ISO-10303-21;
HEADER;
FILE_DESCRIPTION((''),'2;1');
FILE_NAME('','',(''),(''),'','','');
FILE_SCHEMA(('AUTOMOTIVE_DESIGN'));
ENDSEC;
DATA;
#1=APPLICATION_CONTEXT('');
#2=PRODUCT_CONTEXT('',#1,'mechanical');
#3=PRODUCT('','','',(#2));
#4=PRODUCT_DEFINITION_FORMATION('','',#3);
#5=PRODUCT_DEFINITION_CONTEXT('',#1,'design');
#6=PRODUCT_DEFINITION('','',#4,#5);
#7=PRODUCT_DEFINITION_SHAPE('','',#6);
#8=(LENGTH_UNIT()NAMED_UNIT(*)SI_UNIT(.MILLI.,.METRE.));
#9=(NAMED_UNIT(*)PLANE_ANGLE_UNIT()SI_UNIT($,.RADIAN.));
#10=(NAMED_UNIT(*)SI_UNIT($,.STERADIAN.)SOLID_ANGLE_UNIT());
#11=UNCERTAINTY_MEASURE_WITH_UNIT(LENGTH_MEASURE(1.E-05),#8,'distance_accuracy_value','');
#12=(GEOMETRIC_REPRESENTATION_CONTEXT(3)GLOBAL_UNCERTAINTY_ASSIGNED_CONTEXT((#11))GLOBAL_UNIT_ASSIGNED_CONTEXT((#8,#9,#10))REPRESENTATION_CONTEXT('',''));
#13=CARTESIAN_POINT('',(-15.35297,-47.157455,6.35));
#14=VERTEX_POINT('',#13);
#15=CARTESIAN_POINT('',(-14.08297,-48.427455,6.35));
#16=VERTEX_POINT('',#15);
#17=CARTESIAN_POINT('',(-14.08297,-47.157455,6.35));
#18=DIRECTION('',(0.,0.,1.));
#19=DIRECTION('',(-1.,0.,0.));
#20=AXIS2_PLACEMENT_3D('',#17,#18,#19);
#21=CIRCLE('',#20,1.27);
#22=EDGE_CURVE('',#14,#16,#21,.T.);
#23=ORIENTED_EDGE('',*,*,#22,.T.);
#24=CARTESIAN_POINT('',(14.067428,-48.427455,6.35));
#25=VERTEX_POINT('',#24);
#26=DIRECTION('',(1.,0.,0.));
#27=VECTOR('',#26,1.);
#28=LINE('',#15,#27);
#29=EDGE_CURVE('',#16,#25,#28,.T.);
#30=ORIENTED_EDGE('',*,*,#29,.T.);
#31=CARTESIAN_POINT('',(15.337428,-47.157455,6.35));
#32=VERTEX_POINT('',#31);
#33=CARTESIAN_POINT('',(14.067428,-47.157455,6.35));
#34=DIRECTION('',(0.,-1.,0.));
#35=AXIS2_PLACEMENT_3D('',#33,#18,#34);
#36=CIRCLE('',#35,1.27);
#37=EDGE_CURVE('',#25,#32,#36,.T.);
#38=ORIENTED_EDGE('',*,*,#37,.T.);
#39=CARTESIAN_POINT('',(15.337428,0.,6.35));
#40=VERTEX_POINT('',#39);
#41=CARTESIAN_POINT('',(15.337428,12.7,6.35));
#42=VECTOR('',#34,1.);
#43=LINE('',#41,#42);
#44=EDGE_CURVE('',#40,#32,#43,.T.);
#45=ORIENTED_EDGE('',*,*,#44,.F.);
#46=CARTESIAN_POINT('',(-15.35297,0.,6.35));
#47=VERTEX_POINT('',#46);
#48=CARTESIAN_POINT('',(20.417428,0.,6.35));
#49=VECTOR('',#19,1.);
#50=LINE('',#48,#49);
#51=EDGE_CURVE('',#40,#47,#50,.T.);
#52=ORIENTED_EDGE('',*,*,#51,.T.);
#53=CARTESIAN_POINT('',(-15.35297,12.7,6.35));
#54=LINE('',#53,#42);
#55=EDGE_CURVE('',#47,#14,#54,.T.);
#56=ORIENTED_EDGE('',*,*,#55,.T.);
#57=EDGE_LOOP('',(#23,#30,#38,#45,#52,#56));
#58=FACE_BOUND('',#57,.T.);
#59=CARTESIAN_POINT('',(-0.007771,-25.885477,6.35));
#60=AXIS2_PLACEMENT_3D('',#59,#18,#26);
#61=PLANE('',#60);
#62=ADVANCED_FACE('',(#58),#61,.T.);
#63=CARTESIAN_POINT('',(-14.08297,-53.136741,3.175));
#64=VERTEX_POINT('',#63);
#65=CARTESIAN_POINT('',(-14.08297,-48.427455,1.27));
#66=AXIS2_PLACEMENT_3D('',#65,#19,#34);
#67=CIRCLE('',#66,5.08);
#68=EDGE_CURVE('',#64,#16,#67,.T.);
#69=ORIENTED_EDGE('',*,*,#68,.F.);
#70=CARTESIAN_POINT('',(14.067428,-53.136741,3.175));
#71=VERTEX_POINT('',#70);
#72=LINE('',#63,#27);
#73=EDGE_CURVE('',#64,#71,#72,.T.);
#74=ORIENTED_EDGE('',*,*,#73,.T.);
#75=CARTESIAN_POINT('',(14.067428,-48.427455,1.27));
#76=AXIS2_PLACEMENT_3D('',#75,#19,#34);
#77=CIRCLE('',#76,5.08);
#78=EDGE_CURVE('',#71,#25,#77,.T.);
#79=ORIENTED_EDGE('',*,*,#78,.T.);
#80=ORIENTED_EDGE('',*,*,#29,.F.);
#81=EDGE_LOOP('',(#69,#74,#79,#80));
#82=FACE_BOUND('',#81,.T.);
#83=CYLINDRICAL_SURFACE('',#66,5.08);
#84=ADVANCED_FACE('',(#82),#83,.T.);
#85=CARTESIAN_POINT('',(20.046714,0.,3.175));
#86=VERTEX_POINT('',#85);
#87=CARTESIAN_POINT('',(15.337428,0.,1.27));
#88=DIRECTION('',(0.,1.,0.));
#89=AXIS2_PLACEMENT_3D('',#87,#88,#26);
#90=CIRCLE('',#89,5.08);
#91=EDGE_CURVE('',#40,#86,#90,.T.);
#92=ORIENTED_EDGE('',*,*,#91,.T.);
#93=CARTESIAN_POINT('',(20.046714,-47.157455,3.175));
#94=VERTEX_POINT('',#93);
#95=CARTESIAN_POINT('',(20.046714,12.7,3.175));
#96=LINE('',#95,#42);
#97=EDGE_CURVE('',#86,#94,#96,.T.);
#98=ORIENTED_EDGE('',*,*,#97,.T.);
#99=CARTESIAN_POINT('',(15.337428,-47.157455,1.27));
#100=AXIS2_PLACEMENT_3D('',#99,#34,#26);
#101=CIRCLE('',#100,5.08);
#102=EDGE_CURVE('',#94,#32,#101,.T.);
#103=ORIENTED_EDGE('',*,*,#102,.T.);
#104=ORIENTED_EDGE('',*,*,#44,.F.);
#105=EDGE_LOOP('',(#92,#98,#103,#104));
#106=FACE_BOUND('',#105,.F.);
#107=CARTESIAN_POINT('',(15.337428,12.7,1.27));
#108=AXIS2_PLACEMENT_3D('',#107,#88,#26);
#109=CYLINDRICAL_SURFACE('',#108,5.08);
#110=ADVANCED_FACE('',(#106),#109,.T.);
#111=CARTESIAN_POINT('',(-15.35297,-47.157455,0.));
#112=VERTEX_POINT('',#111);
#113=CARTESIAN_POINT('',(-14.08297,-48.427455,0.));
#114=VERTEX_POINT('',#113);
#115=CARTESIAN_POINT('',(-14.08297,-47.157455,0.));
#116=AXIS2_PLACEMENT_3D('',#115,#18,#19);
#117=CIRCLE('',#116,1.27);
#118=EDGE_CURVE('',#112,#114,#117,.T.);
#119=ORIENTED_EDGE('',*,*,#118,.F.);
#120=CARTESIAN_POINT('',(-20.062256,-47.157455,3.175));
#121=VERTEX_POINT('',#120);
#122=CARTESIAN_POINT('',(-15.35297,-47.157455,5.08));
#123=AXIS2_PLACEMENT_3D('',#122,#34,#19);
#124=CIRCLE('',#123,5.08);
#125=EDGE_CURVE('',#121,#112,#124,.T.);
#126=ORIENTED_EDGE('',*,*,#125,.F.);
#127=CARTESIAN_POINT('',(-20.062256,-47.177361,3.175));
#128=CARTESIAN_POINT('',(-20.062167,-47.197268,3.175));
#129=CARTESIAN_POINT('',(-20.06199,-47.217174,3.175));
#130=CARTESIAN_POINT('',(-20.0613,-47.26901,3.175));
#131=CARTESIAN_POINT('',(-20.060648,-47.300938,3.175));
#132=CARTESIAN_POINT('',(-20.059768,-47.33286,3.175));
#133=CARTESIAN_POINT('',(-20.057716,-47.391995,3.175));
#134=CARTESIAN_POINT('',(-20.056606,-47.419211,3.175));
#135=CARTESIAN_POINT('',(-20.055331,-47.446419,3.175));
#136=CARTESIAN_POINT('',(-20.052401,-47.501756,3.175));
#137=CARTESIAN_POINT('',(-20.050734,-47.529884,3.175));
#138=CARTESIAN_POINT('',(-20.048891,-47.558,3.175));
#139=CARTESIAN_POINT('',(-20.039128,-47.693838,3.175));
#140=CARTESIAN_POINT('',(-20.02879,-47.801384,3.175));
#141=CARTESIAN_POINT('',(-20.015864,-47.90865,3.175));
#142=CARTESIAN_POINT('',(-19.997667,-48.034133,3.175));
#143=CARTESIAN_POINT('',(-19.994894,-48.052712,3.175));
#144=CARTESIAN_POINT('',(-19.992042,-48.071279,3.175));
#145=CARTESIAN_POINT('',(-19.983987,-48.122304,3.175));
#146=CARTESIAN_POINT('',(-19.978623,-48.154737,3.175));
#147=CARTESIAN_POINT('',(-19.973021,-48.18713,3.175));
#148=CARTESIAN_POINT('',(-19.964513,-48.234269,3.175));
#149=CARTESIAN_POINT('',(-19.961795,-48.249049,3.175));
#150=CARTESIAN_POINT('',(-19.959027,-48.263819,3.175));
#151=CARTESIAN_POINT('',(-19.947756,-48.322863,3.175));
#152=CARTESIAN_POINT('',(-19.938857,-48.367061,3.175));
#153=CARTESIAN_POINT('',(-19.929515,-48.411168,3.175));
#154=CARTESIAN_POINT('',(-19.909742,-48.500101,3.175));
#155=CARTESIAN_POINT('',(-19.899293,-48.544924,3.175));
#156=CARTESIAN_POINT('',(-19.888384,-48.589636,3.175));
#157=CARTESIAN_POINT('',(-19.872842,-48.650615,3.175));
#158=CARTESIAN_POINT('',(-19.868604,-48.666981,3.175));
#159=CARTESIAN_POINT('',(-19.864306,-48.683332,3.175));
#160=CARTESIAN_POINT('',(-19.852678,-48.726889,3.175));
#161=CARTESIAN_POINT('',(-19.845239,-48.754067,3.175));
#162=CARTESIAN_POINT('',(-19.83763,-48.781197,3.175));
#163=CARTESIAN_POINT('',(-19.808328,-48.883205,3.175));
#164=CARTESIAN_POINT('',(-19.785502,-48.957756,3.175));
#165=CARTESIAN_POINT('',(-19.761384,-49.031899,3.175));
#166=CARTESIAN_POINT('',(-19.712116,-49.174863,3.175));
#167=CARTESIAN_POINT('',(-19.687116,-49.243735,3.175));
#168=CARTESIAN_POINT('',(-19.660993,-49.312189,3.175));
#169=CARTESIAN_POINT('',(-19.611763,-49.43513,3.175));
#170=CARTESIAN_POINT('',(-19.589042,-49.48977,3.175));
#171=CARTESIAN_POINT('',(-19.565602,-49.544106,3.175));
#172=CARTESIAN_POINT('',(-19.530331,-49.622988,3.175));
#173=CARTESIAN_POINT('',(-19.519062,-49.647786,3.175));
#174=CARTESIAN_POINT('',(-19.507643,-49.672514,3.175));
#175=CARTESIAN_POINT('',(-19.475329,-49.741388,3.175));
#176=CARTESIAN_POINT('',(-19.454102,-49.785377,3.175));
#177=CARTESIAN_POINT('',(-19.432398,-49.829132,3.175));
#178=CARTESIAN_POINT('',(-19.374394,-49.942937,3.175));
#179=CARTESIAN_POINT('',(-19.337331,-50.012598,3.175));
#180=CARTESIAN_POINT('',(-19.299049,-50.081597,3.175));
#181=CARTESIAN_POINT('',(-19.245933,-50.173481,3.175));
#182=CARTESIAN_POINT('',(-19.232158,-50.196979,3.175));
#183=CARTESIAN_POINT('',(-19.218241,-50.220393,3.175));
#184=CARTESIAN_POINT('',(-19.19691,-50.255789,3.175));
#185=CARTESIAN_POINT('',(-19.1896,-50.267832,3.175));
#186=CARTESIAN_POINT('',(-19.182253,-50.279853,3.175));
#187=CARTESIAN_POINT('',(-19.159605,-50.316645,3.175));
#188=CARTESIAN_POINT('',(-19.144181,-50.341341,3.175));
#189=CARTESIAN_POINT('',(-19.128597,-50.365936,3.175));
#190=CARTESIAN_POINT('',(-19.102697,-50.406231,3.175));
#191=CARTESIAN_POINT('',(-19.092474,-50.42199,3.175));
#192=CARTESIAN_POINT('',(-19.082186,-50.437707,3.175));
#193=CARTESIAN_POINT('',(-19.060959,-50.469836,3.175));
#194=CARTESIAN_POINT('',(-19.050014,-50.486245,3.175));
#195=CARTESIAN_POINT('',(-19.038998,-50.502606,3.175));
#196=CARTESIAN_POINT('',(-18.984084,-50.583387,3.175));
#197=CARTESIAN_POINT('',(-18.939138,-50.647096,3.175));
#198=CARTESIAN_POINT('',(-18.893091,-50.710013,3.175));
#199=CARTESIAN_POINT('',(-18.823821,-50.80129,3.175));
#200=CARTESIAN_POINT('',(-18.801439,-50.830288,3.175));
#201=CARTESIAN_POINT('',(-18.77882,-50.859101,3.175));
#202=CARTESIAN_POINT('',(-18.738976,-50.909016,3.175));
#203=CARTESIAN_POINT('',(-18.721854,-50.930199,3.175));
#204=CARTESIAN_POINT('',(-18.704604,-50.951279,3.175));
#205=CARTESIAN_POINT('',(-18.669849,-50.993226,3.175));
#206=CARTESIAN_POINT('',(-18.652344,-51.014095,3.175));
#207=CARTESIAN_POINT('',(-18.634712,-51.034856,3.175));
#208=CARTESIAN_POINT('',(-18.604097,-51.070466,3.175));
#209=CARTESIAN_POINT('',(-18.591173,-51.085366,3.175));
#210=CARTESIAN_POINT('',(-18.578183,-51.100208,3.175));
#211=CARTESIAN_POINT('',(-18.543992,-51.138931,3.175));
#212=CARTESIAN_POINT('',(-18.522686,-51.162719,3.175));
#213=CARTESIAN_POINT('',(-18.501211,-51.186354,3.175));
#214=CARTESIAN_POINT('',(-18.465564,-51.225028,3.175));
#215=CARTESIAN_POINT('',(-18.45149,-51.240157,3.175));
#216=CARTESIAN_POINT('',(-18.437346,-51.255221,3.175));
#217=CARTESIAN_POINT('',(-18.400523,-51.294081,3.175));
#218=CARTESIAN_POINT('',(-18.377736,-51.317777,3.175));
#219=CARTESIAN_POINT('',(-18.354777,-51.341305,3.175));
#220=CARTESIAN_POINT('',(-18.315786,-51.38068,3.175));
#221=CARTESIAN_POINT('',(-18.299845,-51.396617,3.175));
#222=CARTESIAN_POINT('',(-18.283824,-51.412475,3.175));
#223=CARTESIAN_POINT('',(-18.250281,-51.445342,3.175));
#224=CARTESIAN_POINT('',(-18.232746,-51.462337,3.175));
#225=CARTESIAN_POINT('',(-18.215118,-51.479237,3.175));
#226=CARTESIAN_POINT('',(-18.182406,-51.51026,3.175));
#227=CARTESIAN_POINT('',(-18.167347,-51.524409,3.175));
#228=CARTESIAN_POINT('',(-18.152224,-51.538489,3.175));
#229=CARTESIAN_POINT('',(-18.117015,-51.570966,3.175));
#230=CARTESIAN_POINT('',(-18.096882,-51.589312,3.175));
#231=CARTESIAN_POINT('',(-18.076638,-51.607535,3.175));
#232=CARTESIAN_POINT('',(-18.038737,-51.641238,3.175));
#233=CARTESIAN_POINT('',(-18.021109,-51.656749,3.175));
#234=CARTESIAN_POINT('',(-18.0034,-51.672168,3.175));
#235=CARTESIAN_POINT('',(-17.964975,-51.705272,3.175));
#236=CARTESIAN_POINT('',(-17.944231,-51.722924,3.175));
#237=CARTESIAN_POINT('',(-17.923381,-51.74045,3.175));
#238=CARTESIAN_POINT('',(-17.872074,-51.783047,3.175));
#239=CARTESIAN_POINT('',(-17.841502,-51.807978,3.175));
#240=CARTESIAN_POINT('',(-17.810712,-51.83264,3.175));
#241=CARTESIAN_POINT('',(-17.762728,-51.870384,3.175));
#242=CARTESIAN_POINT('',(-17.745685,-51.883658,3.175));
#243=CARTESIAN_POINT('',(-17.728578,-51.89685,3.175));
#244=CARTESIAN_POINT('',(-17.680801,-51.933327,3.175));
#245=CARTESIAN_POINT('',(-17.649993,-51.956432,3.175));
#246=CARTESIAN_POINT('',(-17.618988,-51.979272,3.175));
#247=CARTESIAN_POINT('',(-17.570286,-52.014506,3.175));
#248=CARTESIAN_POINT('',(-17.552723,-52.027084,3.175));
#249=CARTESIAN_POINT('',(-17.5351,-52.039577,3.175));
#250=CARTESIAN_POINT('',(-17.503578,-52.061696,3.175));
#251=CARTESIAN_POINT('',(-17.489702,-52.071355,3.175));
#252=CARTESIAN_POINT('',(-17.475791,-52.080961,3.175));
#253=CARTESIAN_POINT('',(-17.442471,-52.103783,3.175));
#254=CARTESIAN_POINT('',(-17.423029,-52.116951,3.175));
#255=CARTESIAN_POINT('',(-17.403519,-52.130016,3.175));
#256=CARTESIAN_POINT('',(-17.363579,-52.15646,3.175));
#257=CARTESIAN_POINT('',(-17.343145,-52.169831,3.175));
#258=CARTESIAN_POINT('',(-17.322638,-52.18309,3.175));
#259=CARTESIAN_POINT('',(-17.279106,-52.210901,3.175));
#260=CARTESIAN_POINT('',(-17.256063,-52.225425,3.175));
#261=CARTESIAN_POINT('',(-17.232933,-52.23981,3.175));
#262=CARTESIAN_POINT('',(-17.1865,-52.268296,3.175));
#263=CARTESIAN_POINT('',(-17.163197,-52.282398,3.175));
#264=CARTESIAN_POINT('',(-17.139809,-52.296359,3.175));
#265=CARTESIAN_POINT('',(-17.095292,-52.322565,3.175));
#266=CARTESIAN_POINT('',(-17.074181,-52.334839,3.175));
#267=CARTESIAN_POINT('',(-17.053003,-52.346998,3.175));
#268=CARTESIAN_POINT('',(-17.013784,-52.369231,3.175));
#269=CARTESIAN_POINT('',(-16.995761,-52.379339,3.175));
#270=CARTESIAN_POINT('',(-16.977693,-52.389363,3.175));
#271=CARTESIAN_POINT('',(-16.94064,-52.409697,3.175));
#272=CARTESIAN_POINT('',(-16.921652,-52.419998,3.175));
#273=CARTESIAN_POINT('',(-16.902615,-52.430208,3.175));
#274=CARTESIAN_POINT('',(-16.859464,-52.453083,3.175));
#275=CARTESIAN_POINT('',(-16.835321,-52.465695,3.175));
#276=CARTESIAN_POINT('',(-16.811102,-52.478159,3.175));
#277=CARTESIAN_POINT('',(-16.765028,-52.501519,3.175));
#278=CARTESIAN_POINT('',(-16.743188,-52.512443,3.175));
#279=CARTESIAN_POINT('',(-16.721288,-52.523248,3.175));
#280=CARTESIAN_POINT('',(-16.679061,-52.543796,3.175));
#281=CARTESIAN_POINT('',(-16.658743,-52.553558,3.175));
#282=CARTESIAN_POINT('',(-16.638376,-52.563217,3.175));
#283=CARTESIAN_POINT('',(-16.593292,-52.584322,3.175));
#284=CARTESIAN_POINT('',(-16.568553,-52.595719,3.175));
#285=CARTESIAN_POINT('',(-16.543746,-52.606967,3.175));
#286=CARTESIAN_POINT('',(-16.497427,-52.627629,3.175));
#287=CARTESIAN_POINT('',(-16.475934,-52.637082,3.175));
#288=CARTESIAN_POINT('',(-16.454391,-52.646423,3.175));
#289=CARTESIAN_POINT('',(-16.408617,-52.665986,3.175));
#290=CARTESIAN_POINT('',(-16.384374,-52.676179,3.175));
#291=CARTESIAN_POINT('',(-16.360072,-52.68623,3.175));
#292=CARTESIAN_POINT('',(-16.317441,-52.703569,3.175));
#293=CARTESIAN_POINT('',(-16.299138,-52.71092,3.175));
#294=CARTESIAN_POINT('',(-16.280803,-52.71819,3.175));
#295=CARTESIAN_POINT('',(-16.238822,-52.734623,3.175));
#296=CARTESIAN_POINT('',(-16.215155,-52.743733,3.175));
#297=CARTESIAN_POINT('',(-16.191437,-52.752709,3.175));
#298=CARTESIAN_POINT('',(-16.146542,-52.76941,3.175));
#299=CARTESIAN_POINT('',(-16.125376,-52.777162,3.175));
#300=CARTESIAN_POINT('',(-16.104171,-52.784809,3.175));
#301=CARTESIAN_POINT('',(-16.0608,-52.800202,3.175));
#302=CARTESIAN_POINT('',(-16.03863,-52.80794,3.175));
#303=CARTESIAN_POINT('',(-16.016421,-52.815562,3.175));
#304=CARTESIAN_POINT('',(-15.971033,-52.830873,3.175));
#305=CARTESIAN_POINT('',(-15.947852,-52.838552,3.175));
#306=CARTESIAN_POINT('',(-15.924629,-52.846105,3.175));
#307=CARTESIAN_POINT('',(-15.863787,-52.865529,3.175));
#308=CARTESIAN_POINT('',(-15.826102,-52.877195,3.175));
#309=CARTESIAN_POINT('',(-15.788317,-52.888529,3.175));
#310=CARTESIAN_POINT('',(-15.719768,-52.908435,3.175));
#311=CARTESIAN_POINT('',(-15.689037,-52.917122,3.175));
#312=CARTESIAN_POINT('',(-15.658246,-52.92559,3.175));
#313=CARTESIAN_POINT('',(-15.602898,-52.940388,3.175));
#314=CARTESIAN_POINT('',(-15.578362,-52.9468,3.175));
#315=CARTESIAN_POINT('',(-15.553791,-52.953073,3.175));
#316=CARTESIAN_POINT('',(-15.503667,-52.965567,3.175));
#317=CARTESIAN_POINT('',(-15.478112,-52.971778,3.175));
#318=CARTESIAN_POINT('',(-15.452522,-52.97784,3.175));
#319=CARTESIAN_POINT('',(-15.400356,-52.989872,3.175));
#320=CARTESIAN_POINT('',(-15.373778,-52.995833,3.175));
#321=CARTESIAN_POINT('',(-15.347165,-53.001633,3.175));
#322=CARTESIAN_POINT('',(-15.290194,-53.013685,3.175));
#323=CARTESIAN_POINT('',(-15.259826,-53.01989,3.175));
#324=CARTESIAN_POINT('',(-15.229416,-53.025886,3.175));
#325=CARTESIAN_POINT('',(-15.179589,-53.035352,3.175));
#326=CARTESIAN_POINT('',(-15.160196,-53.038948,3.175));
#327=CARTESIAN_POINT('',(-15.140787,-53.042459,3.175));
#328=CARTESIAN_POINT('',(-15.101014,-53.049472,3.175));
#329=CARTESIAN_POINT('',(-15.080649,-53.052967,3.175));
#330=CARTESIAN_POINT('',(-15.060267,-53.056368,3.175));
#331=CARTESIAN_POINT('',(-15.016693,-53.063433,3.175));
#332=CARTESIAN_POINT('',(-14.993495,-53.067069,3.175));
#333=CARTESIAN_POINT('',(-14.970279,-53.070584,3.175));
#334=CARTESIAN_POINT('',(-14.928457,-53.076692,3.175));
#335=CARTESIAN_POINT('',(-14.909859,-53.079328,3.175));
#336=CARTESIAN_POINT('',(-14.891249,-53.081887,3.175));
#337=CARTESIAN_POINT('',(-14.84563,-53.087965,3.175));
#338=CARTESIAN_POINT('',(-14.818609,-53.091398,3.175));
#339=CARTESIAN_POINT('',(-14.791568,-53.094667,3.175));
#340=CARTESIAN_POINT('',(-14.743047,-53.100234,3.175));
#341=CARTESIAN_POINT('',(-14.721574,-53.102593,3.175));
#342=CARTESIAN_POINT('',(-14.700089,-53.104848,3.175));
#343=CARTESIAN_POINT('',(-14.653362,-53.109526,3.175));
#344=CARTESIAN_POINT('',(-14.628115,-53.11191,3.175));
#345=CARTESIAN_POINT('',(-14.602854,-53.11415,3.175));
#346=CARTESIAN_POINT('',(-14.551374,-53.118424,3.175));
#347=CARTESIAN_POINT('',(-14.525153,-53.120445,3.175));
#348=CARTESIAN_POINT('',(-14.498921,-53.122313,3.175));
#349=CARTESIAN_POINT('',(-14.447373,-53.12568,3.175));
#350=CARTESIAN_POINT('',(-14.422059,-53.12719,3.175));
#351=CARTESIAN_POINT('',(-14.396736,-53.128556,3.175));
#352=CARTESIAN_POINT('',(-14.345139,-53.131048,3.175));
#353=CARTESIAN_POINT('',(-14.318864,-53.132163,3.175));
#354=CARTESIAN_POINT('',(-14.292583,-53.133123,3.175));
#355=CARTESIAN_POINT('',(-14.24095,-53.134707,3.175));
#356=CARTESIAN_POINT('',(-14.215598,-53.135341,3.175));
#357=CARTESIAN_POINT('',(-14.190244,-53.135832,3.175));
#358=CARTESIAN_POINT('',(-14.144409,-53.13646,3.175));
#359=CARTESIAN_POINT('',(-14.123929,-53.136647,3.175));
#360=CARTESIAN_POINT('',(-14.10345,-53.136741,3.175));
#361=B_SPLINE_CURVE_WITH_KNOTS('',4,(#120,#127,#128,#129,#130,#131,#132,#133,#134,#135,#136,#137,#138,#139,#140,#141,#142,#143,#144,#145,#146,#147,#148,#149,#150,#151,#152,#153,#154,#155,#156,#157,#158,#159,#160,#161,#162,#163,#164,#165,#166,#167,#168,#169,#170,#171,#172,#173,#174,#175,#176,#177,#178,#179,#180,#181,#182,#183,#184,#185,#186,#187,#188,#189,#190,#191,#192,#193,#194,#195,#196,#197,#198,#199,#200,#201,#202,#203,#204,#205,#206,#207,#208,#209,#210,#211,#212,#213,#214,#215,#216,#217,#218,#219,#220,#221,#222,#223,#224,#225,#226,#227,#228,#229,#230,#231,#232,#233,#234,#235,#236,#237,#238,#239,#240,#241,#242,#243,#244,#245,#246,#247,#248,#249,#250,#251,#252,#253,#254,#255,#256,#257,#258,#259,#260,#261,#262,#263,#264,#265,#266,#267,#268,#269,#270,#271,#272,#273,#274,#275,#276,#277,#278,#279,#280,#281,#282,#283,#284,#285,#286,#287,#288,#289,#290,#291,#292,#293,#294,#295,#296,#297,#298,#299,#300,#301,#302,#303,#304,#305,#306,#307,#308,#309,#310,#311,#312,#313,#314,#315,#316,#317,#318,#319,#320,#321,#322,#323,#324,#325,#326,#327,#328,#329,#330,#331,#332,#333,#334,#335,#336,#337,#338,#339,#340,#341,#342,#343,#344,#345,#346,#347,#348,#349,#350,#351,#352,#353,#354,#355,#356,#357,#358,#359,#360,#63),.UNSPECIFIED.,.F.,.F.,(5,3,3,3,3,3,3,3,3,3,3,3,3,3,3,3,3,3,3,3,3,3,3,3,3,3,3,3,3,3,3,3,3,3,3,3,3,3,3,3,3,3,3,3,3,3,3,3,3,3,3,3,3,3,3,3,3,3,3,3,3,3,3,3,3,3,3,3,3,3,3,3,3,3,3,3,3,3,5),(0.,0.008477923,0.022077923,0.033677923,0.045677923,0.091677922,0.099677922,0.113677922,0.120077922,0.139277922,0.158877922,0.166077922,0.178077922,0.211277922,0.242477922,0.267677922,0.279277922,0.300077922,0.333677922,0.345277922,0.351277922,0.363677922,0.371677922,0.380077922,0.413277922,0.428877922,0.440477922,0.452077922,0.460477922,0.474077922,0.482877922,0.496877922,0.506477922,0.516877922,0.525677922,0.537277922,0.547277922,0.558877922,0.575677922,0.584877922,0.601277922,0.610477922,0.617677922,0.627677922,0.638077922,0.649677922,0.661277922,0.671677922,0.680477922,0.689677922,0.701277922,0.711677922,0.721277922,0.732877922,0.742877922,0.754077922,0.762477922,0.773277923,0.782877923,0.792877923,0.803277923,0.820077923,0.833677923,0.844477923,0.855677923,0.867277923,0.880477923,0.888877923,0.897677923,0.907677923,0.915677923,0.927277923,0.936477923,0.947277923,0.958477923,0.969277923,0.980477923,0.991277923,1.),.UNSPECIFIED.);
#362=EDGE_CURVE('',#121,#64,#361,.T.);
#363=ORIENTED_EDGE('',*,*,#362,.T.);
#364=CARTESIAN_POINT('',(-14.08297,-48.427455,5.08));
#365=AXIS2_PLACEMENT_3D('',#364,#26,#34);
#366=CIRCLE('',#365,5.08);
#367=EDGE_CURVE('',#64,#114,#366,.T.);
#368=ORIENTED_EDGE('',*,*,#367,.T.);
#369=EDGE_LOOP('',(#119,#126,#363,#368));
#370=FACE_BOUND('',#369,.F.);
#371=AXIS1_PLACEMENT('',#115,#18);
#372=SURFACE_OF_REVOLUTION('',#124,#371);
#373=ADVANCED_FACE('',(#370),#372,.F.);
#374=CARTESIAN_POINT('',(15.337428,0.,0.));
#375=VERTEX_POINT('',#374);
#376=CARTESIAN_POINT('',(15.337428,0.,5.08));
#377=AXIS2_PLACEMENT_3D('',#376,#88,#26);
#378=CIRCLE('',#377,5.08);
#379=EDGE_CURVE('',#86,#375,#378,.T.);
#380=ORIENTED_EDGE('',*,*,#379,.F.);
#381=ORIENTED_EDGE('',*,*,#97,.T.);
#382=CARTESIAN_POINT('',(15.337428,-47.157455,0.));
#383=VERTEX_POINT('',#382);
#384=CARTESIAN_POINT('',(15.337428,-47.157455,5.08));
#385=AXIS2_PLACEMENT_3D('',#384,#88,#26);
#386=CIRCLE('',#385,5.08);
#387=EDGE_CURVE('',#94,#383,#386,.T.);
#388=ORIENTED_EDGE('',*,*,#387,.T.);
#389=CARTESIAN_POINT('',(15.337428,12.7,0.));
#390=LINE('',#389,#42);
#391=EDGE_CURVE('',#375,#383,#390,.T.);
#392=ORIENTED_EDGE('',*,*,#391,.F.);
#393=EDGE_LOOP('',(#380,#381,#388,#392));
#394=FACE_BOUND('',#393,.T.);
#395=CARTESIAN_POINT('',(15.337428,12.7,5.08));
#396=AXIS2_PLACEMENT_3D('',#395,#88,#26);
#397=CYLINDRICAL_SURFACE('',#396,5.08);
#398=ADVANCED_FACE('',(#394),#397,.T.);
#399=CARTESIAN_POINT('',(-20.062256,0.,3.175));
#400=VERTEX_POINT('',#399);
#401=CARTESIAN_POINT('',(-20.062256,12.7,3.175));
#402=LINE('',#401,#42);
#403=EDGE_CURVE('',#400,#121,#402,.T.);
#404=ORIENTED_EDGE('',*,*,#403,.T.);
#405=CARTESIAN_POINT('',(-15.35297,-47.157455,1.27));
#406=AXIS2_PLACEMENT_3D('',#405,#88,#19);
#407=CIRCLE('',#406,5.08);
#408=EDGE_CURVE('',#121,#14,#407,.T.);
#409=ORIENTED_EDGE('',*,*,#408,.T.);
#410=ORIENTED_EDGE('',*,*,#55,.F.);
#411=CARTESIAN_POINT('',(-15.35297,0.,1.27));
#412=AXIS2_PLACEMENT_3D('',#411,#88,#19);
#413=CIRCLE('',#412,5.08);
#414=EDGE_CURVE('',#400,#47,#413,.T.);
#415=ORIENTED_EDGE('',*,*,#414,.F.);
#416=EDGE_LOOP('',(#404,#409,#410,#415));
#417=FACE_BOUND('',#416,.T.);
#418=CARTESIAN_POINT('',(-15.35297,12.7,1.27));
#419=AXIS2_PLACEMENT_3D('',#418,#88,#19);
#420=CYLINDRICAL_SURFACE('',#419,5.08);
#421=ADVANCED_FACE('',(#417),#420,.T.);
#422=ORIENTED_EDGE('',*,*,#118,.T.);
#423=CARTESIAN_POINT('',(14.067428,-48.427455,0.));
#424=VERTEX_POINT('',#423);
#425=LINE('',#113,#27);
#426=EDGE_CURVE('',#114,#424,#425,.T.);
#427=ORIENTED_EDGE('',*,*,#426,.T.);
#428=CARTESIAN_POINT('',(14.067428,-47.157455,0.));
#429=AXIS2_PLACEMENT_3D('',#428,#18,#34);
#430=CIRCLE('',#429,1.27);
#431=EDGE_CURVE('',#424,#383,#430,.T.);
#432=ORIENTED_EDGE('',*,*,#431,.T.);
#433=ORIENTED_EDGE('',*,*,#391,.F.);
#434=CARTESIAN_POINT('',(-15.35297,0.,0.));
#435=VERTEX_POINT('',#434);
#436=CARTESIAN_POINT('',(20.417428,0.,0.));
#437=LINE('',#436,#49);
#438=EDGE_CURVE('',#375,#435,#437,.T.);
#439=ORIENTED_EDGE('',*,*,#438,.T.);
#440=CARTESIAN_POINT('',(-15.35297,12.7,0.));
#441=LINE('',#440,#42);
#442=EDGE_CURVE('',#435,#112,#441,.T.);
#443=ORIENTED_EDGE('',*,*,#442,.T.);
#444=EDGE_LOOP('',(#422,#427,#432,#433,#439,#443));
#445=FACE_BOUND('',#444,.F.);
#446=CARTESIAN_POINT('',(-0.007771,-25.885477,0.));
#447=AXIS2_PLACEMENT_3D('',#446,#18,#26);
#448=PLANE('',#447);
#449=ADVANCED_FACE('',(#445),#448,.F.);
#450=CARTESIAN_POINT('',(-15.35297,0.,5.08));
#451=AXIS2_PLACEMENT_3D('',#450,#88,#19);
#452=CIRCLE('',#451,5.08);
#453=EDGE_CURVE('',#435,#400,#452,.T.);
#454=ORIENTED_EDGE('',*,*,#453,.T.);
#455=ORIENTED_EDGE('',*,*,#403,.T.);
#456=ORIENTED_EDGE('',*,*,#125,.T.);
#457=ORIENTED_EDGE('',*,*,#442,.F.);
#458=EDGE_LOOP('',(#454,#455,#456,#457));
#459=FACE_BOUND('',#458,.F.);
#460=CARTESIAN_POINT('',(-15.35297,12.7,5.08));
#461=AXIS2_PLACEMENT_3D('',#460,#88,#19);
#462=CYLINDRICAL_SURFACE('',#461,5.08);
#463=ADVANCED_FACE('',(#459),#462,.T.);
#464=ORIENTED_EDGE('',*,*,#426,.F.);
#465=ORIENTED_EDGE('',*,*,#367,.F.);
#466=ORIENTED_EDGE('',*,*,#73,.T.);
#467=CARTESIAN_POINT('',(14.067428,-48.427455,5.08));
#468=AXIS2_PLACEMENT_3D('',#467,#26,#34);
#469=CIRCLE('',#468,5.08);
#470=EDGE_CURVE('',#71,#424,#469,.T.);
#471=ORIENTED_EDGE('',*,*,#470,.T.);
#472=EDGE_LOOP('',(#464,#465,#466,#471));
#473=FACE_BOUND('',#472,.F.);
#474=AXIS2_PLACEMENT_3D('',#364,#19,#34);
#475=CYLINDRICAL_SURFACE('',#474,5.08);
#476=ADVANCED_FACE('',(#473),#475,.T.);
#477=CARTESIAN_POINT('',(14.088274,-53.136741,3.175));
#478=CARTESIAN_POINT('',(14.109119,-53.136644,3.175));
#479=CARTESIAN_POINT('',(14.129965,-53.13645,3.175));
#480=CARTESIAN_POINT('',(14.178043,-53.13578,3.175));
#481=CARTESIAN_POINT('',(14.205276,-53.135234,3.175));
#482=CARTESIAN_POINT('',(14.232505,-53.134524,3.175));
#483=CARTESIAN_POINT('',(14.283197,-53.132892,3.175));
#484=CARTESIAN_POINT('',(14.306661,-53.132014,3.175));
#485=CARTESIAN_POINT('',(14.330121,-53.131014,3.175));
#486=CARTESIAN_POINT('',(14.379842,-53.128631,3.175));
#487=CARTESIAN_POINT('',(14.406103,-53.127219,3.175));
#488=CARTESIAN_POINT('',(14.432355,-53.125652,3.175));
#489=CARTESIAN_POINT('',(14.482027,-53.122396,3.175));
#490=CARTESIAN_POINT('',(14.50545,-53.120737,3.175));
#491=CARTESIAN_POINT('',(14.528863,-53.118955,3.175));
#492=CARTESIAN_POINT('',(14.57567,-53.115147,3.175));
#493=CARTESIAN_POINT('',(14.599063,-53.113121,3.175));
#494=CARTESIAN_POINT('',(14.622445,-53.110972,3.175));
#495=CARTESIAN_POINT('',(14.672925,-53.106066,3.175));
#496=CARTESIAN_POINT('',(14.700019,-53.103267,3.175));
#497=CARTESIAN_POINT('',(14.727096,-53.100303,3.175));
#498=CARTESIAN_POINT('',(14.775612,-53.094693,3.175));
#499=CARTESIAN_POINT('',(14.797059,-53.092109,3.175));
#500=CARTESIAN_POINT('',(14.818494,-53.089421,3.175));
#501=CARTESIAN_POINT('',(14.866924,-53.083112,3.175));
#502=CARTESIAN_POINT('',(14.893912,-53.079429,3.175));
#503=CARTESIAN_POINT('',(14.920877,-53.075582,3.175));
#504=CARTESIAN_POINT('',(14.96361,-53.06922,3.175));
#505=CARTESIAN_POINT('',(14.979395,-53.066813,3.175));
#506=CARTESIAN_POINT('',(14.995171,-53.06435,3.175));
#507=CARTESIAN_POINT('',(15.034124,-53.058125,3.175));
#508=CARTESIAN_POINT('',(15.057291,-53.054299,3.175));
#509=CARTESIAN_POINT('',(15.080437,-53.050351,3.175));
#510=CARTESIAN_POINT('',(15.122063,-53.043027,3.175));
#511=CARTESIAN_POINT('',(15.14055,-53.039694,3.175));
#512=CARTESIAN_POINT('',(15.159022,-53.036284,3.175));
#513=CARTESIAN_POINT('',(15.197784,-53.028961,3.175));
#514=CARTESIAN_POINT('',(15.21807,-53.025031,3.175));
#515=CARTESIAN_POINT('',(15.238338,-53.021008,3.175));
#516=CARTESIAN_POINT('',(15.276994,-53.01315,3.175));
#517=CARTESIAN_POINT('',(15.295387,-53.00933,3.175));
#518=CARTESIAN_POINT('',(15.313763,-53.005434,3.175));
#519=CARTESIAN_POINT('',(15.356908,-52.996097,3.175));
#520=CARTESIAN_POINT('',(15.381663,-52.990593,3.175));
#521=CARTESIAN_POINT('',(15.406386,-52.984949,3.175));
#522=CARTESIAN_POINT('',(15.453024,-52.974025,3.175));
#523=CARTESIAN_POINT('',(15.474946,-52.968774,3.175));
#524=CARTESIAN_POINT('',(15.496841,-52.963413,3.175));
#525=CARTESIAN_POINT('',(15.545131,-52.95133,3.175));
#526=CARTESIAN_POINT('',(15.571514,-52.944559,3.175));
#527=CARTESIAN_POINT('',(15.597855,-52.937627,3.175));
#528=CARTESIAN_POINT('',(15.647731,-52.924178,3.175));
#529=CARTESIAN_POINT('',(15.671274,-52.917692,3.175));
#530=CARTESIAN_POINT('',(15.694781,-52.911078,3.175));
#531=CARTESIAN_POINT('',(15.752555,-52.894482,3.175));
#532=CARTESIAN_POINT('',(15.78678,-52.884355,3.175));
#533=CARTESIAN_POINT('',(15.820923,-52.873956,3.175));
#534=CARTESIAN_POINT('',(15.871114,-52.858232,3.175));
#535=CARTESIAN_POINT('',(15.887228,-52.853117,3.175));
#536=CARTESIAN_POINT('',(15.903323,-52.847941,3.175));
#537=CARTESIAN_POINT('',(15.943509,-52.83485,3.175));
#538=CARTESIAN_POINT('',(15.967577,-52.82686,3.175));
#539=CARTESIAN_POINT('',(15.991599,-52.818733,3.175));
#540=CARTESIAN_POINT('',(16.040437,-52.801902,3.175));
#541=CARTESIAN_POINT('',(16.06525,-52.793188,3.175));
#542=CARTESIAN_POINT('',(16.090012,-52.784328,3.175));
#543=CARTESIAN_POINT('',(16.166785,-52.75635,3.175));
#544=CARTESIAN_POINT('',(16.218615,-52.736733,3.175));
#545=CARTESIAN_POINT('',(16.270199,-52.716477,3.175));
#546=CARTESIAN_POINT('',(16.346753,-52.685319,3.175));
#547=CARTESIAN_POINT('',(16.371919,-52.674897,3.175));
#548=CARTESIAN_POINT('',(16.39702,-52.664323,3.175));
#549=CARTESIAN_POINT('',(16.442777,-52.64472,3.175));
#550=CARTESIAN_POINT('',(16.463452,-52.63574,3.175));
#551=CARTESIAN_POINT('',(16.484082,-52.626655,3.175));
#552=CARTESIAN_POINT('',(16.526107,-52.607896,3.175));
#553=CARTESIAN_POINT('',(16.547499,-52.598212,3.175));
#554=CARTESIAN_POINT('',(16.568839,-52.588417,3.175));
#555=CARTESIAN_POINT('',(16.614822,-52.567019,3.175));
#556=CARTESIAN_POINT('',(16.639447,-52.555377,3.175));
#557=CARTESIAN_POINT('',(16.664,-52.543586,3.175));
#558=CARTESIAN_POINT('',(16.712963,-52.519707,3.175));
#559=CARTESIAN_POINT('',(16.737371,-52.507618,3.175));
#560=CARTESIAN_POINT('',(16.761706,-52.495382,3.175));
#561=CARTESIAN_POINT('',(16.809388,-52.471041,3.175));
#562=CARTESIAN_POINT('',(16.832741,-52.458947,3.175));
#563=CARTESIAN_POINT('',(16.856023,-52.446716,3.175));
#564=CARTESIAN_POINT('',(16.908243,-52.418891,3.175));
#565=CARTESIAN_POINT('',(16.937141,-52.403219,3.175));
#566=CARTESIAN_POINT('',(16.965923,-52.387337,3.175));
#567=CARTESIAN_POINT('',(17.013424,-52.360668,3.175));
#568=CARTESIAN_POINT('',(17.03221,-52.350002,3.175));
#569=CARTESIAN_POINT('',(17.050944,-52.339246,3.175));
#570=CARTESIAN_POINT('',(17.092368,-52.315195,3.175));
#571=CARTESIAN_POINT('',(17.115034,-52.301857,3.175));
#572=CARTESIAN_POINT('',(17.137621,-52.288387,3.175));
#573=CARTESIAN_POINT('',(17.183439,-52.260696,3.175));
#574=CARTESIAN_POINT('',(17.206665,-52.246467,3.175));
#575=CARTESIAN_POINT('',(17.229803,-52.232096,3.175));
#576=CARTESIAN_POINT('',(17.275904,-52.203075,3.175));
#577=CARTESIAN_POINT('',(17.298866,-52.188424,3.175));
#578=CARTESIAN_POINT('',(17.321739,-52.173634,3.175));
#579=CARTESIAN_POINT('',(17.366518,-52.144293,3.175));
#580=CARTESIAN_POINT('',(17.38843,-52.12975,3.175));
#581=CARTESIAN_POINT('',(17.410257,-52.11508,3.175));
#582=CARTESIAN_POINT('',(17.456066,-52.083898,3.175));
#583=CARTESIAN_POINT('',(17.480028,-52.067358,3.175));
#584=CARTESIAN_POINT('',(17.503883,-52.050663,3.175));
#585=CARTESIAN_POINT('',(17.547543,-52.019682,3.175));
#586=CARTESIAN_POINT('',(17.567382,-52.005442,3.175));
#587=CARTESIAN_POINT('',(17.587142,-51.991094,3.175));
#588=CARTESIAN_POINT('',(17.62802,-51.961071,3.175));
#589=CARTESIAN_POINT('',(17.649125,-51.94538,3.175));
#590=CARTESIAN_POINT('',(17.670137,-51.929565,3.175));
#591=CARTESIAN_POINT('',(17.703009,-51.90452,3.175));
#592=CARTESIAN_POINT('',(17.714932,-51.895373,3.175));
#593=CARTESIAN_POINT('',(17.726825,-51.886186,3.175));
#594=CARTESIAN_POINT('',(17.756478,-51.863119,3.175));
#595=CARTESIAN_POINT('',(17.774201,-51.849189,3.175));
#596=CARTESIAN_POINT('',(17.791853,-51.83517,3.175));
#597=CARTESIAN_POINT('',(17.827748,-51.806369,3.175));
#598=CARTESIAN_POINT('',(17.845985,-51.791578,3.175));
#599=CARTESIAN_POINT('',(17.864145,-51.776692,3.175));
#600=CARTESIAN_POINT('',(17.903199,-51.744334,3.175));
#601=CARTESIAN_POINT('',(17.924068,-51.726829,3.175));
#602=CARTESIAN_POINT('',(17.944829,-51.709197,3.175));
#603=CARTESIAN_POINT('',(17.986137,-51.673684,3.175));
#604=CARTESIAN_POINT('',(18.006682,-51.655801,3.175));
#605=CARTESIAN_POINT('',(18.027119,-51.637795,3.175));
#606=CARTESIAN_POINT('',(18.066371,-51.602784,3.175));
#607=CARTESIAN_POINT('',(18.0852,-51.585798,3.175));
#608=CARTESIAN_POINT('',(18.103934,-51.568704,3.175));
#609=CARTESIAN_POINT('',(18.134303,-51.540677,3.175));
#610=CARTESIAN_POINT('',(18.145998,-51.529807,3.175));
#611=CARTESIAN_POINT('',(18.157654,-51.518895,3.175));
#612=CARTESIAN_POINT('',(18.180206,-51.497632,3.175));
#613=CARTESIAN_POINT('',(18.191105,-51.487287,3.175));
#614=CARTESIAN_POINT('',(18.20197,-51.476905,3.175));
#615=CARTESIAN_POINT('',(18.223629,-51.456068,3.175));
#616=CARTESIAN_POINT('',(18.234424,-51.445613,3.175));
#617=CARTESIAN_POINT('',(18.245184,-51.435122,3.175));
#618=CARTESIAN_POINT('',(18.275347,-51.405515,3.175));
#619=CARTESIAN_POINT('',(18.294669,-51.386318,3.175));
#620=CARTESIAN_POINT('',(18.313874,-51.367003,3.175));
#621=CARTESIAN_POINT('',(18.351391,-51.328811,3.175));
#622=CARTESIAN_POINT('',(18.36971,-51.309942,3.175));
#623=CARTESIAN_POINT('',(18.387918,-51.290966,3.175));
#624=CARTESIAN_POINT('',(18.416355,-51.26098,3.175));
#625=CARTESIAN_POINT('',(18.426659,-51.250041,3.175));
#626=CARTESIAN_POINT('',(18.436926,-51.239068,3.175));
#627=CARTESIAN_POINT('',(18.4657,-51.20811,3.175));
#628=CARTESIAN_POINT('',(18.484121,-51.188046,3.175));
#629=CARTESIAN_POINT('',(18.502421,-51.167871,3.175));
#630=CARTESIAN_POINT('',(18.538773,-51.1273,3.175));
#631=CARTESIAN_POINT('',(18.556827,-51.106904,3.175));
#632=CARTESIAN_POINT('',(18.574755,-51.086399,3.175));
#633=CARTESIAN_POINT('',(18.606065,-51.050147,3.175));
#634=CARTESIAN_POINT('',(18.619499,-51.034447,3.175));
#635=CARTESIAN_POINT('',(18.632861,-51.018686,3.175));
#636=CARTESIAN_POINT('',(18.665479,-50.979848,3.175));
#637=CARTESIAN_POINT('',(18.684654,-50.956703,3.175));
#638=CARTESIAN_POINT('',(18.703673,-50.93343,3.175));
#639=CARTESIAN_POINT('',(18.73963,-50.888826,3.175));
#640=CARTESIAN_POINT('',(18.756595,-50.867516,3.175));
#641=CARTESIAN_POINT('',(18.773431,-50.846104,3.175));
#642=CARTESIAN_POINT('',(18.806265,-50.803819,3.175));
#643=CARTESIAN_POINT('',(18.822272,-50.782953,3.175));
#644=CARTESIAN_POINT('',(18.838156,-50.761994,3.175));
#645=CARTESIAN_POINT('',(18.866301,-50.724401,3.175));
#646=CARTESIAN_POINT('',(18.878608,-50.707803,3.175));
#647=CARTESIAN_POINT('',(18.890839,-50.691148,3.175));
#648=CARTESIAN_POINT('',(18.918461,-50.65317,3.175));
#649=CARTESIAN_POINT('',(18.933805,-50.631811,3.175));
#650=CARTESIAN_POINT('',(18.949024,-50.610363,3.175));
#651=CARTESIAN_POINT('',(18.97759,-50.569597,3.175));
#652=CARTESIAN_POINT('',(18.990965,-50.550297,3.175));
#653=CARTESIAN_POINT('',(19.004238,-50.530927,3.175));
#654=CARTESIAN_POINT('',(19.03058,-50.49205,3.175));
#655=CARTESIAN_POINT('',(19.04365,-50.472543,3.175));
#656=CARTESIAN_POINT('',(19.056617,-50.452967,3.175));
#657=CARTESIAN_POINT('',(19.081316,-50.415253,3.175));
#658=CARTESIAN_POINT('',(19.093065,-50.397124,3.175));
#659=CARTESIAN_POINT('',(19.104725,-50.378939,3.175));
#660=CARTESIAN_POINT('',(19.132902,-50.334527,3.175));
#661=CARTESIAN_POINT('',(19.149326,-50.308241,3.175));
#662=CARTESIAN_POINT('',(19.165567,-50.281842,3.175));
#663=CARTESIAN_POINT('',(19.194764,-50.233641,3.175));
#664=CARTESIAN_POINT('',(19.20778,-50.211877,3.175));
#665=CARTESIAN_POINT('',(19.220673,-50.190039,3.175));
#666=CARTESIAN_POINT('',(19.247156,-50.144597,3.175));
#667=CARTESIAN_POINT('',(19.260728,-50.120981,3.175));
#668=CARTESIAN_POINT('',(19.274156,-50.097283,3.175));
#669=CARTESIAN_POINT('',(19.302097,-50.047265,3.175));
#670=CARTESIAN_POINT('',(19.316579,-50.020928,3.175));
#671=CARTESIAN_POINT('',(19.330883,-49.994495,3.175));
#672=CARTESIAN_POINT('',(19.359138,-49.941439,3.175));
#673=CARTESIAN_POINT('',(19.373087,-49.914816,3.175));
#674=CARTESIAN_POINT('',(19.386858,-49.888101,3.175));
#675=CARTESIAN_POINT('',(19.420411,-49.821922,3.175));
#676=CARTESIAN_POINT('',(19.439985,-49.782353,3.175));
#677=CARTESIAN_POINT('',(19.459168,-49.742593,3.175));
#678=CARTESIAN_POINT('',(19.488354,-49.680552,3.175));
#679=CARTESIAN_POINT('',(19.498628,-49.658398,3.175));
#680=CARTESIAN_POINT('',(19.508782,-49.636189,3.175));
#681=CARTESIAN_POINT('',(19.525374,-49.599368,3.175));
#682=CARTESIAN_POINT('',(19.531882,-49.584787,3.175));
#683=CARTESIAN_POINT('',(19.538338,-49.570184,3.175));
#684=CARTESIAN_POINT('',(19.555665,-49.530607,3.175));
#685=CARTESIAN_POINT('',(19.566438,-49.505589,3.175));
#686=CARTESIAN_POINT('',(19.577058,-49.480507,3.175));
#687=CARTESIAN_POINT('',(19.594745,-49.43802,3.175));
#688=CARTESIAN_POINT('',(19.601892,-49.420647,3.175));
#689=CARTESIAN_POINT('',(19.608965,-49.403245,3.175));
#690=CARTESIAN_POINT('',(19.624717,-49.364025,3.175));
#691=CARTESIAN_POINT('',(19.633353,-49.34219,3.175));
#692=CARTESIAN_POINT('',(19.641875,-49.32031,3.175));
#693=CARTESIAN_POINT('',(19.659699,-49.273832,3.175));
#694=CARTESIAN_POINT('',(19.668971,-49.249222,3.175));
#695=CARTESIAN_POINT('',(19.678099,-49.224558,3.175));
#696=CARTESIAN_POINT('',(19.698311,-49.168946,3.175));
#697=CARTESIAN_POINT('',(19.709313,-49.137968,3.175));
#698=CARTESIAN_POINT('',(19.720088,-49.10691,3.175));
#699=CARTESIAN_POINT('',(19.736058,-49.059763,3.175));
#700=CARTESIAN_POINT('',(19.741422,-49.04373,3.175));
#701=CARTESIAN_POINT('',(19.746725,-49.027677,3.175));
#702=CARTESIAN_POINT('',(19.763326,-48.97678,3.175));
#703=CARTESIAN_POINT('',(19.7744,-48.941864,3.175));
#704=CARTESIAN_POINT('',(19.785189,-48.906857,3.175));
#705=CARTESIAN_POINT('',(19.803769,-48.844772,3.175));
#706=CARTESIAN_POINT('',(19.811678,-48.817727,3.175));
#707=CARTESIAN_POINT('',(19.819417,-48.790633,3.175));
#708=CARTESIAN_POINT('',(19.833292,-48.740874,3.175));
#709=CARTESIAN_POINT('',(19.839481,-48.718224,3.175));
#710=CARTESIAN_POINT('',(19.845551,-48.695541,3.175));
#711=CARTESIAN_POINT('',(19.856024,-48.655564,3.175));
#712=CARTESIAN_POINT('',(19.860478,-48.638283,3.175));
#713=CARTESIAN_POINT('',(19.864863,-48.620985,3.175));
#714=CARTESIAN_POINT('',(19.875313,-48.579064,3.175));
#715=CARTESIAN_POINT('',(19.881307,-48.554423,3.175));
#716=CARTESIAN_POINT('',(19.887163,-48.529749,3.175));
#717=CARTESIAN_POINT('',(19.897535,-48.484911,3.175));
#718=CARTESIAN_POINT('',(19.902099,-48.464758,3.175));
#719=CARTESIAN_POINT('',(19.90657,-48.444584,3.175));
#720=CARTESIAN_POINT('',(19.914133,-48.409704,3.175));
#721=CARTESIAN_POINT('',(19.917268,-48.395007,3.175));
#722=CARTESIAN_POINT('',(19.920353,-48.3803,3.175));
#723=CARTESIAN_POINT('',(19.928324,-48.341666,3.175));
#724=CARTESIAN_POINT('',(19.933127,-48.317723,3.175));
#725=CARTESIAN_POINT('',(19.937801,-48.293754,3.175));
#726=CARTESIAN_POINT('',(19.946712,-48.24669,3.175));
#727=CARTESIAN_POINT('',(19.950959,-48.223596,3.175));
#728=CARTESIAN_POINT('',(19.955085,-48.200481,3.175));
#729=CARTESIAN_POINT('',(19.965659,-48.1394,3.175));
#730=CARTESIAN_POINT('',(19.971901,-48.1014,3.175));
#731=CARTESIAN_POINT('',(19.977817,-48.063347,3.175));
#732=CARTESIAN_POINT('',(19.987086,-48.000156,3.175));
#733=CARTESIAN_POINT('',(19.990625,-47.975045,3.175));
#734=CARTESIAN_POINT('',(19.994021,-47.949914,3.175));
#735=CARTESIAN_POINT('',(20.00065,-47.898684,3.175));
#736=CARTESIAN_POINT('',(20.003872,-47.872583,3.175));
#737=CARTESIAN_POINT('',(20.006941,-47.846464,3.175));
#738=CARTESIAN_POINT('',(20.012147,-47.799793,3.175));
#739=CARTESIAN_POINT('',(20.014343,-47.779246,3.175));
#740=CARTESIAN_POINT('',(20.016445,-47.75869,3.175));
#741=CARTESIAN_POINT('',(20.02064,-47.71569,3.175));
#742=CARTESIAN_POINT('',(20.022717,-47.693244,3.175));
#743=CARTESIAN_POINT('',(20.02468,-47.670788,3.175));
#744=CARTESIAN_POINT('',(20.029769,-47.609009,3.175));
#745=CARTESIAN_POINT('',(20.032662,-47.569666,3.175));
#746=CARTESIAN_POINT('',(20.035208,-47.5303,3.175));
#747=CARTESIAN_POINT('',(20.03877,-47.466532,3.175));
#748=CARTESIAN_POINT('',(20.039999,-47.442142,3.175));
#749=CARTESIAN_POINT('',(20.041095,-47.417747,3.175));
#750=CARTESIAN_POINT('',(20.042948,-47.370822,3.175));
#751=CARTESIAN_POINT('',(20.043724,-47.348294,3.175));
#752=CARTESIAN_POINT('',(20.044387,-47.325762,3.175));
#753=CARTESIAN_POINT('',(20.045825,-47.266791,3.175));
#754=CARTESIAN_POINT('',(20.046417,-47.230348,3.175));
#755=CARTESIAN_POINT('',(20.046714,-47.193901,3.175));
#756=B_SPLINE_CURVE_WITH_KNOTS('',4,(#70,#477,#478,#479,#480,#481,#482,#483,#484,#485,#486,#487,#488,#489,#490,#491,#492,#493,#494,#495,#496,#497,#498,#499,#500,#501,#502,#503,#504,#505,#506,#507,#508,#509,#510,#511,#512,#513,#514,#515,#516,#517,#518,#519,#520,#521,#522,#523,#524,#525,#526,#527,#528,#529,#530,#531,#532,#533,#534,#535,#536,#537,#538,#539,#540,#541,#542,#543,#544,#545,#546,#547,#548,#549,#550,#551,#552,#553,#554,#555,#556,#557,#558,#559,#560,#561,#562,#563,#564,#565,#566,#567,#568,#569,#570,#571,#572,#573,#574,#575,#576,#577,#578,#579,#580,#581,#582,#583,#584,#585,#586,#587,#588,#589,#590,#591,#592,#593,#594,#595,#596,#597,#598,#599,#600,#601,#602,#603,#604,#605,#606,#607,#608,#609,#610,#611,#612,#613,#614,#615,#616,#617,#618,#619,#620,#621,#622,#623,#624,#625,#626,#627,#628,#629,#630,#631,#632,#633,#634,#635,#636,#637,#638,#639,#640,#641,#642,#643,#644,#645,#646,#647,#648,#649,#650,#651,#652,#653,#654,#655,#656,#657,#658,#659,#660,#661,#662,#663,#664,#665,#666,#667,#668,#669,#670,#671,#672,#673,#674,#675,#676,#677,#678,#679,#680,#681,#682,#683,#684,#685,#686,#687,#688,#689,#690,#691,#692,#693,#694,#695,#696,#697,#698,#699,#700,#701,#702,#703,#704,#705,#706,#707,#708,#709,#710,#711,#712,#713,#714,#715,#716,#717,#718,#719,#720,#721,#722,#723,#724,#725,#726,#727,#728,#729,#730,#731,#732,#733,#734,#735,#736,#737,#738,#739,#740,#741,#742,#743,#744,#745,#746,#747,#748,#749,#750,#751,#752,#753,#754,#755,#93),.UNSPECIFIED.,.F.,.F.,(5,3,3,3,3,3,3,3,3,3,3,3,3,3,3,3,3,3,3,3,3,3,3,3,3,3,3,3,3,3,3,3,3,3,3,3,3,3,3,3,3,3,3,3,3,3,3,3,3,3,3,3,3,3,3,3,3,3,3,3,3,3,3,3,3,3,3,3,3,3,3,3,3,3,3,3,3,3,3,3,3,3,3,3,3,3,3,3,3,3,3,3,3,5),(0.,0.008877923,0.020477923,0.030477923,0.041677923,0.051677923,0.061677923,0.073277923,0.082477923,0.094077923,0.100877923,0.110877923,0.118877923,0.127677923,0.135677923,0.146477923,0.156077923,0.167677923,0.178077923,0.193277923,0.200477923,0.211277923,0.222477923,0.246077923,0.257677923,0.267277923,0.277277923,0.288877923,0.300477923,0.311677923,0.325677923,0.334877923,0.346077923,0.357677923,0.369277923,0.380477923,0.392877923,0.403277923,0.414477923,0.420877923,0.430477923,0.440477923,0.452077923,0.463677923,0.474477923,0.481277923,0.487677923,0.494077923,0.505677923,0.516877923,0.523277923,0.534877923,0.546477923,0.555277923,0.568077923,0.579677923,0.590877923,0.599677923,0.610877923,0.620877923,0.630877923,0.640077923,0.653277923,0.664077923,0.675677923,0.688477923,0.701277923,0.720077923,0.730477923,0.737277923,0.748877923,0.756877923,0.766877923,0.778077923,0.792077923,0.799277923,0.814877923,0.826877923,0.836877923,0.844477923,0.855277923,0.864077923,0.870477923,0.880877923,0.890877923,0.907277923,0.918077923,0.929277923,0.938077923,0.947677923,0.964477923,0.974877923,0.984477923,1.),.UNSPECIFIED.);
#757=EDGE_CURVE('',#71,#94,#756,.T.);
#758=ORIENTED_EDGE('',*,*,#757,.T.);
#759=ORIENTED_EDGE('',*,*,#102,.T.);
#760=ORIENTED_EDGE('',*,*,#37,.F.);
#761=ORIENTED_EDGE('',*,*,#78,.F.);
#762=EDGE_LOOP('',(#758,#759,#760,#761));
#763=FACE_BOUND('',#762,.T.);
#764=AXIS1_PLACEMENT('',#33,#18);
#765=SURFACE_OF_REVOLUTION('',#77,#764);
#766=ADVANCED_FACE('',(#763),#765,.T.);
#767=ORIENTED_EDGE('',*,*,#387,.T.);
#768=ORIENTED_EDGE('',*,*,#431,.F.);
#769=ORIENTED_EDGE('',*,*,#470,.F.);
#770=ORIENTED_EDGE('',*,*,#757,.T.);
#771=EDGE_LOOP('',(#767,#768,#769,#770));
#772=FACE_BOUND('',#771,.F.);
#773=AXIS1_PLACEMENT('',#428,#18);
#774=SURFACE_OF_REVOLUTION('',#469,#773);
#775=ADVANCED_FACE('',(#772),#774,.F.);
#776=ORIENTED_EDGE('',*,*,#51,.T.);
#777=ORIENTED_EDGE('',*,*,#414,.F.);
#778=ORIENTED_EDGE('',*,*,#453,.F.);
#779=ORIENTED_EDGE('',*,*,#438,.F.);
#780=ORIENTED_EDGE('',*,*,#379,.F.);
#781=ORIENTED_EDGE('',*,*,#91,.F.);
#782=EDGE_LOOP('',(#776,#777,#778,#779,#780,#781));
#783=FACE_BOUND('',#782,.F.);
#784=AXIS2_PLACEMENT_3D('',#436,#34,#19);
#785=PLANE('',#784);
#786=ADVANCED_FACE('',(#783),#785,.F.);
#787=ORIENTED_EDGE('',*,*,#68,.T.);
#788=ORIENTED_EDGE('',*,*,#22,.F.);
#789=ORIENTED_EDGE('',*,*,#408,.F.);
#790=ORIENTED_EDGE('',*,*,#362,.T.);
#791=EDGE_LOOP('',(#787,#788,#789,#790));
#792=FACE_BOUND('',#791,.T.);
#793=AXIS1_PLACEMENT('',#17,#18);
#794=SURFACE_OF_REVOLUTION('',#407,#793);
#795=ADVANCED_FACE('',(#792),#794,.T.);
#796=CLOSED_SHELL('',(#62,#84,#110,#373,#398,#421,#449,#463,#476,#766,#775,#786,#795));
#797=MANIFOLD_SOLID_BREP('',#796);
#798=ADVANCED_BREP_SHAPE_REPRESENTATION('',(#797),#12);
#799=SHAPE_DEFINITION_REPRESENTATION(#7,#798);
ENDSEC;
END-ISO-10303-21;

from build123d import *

# Parameters (mm, degrees)
F1_DEPTH     = 6.35
F2_T1_DEPTH  = 59.8574546933
F2_T3_DEPTH  = 28.1503971994
F2_T6_ANGLE  = 90
F2_T8_ANGLE  = 90
F2_T10_ANGLE = 90
F2_T12_ANGLE = 90


# Not quite as in the source:
# - a fillet or chamfer that OpenCascade refuses, or shapes differently, is made with other operations: its cross-section is extruded or revolved along the edge and cut away or added


with BuildPart() as f1:
    # F0 (on Top) → F1 (new body)
    with BuildSketch(Plane.XY):
        with BuildLine():
            Line((20.4174276441, 0), (-20.4329695553, 0))
            Line((-20.4329695553, 0), (-20.4329695553, -47.1574546933))
            ThreePointArc((-20.4329695553, -47.1574546933), (-18.5730976158, -51.6475827539), (-14.0829695553, -53.5074546933))
            Line((-14.0829695553, -53.5074546933), (14.0674276441, -53.5074546933))
            ThreePointArc((14.0674276441, -53.5074546933), (18.5575557047, -51.6475827539), (20.4174276441, -47.1574546933))
            Line((20.4174276441, -47.1574546933), (20.4174276441, 0))
        make_face()
    extrude(amount=F1_DEPTH)

    # F2: fillet of radius 5.08 on 10 edges, made by hand

    # F2_s2 → F2_t1 (cut)
    with BuildSketch(Plane.XZ.offset(-12.7)):
        with BuildLine():
            ThreePointArc((20.4174276441, 1.27), (18.9295300926, 4.8621024484), (15.3374276441, 6.35))
            Line((15.3374276441, 6.35), (20.4174276441, 6.35))
            Line((20.4174276441, 6.35), (20.4174276441, 1.27))
        make_face()
        with BuildLine():
            ThreePointArc((20.4174276441, 5.08), (18.9295300926, 1.4878975516), (15.3374276441, 0))
            Line((15.3374276441, 0), (20.4174276441, 0))
            Line((20.4174276441, 0), (20.4174276441, 5.08))
        make_face()
        with BuildLine():
            ThreePointArc((-20.4329695553, 1.27), (-18.9450720037, 4.8621024484), (-15.3529695553, 6.35))
            Line((-15.3529695553, 6.35), (-20.4329695553, 6.35))
            Line((-20.4329695553, 6.35), (-20.4329695553, 1.27))
        make_face()
        with BuildLine():
            ThreePointArc((-20.4329695553, 5.08), (-18.9450720037, 1.4878975516), (-15.3529695553, 0))
            Line((-15.3529695553, 0), (-20.4329695553, 0))
            Line((-20.4329695553, 0), (-20.4329695553, 5.08))
        make_face()
    extrude(amount=F2_T1_DEPTH, mode=Mode.SUBTRACT)

    # F2_s4 → F2_t3 (cut)
    with BuildSketch(Plane.YZ.offset(-14.0829695553)):
        with BuildLine():
            ThreePointArc((-53.5074546933, 5.08), (-52.0195571417, 1.4878975516), (-48.4274546933, 0))
            Line((-48.4274546933, 0), (-53.5074546933, 0))
            Line((-53.5074546933, 0), (-53.5074546933, 5.08))
        make_face()
        with BuildLine():
            ThreePointArc((-53.5074546933, 1.27), (-52.0195571417, 4.8621024484), (-48.4274546933, 6.35))
            Line((-48.4274546933, 6.35), (-53.5074546933, 6.35))
            Line((-53.5074546933, 6.35), (-53.5074546933, 1.27))
        make_face()
    extrude(amount=F2_T3_DEPTH, mode=Mode.SUBTRACT)

    # F2_s5 → F2_t6 (revolve, cut)
    with BuildSketch(Plane.YZ.offset(14.0674276441)):
        with BuildLine():
            ThreePointArc((-53.5074546933, 1.27), (-52.0195571417, 4.8621024484), (-48.4274546933, 6.35))
            Line((-48.4274546933, 6.35), (-53.5074546933, 6.35))
            Line((-53.5074546933, 6.35), (-53.5074546933, 1.27))
        make_face()
    revolve(axis=Axis((14.0674276441, -47.1574546933, 6.35), (0, 0, 1)), revolution_arc=F2_T6_ANGLE, mode=Mode.SUBTRACT)

    # F2_s7 → F2_t8 (revolve, cut)
    with BuildSketch(Plane.YZ.offset(14.0674276441)):
        with BuildLine():
            ThreePointArc((-53.5074546933, 5.08), (-52.0195571417, 1.4878975516), (-48.4274546933, 0))
            Line((-48.4274546933, 0), (-53.5074546933, 0))
            Line((-53.5074546933, 0), (-53.5074546933, 5.08))
        make_face()
    revolve(axis=Axis((14.0674276441, -47.1574546933, 0), (0, 0, 1)), revolution_arc=F2_T8_ANGLE, mode=Mode.SUBTRACT)

    # F2_s9 → F2_t10 (revolve, cut)
    with BuildSketch(Plane.XZ.offset(47.1574546933)):
        with BuildLine():
            ThreePointArc((-20.4329695553, 1.27), (-18.9450720037, 4.8621024484), (-15.3529695553, 6.35))
            Line((-15.3529695553, 6.35), (-20.4329695553, 6.35))
            Line((-20.4329695553, 6.35), (-20.4329695553, 1.27))
        make_face()
    revolve(axis=Axis((-14.0829695553, -47.1574546933, 6.35), (0, 0, 1)), revolution_arc=F2_T10_ANGLE, mode=Mode.SUBTRACT)

    # F2_s11 → F2_t12 (revolve, cut)
    with BuildSketch(Plane.XZ.offset(47.1574546933)):
        with BuildLine():
            ThreePointArc((-20.4329695553, 5.08), (-18.9450720037, 1.4878975516), (-15.3529695553, 0))
            Line((-15.3529695553, 0), (-20.4329695553, 0))
            Line((-20.4329695553, 0), (-20.4329695553, 5.08))
        make_face()
    revolve(axis=Axis((-14.0829695553, -47.1574546933, 0), (0, 0, 1)), revolution_arc=F2_T12_ANGLE, mode=Mode.SUBTRACT)


solid = f1.part
